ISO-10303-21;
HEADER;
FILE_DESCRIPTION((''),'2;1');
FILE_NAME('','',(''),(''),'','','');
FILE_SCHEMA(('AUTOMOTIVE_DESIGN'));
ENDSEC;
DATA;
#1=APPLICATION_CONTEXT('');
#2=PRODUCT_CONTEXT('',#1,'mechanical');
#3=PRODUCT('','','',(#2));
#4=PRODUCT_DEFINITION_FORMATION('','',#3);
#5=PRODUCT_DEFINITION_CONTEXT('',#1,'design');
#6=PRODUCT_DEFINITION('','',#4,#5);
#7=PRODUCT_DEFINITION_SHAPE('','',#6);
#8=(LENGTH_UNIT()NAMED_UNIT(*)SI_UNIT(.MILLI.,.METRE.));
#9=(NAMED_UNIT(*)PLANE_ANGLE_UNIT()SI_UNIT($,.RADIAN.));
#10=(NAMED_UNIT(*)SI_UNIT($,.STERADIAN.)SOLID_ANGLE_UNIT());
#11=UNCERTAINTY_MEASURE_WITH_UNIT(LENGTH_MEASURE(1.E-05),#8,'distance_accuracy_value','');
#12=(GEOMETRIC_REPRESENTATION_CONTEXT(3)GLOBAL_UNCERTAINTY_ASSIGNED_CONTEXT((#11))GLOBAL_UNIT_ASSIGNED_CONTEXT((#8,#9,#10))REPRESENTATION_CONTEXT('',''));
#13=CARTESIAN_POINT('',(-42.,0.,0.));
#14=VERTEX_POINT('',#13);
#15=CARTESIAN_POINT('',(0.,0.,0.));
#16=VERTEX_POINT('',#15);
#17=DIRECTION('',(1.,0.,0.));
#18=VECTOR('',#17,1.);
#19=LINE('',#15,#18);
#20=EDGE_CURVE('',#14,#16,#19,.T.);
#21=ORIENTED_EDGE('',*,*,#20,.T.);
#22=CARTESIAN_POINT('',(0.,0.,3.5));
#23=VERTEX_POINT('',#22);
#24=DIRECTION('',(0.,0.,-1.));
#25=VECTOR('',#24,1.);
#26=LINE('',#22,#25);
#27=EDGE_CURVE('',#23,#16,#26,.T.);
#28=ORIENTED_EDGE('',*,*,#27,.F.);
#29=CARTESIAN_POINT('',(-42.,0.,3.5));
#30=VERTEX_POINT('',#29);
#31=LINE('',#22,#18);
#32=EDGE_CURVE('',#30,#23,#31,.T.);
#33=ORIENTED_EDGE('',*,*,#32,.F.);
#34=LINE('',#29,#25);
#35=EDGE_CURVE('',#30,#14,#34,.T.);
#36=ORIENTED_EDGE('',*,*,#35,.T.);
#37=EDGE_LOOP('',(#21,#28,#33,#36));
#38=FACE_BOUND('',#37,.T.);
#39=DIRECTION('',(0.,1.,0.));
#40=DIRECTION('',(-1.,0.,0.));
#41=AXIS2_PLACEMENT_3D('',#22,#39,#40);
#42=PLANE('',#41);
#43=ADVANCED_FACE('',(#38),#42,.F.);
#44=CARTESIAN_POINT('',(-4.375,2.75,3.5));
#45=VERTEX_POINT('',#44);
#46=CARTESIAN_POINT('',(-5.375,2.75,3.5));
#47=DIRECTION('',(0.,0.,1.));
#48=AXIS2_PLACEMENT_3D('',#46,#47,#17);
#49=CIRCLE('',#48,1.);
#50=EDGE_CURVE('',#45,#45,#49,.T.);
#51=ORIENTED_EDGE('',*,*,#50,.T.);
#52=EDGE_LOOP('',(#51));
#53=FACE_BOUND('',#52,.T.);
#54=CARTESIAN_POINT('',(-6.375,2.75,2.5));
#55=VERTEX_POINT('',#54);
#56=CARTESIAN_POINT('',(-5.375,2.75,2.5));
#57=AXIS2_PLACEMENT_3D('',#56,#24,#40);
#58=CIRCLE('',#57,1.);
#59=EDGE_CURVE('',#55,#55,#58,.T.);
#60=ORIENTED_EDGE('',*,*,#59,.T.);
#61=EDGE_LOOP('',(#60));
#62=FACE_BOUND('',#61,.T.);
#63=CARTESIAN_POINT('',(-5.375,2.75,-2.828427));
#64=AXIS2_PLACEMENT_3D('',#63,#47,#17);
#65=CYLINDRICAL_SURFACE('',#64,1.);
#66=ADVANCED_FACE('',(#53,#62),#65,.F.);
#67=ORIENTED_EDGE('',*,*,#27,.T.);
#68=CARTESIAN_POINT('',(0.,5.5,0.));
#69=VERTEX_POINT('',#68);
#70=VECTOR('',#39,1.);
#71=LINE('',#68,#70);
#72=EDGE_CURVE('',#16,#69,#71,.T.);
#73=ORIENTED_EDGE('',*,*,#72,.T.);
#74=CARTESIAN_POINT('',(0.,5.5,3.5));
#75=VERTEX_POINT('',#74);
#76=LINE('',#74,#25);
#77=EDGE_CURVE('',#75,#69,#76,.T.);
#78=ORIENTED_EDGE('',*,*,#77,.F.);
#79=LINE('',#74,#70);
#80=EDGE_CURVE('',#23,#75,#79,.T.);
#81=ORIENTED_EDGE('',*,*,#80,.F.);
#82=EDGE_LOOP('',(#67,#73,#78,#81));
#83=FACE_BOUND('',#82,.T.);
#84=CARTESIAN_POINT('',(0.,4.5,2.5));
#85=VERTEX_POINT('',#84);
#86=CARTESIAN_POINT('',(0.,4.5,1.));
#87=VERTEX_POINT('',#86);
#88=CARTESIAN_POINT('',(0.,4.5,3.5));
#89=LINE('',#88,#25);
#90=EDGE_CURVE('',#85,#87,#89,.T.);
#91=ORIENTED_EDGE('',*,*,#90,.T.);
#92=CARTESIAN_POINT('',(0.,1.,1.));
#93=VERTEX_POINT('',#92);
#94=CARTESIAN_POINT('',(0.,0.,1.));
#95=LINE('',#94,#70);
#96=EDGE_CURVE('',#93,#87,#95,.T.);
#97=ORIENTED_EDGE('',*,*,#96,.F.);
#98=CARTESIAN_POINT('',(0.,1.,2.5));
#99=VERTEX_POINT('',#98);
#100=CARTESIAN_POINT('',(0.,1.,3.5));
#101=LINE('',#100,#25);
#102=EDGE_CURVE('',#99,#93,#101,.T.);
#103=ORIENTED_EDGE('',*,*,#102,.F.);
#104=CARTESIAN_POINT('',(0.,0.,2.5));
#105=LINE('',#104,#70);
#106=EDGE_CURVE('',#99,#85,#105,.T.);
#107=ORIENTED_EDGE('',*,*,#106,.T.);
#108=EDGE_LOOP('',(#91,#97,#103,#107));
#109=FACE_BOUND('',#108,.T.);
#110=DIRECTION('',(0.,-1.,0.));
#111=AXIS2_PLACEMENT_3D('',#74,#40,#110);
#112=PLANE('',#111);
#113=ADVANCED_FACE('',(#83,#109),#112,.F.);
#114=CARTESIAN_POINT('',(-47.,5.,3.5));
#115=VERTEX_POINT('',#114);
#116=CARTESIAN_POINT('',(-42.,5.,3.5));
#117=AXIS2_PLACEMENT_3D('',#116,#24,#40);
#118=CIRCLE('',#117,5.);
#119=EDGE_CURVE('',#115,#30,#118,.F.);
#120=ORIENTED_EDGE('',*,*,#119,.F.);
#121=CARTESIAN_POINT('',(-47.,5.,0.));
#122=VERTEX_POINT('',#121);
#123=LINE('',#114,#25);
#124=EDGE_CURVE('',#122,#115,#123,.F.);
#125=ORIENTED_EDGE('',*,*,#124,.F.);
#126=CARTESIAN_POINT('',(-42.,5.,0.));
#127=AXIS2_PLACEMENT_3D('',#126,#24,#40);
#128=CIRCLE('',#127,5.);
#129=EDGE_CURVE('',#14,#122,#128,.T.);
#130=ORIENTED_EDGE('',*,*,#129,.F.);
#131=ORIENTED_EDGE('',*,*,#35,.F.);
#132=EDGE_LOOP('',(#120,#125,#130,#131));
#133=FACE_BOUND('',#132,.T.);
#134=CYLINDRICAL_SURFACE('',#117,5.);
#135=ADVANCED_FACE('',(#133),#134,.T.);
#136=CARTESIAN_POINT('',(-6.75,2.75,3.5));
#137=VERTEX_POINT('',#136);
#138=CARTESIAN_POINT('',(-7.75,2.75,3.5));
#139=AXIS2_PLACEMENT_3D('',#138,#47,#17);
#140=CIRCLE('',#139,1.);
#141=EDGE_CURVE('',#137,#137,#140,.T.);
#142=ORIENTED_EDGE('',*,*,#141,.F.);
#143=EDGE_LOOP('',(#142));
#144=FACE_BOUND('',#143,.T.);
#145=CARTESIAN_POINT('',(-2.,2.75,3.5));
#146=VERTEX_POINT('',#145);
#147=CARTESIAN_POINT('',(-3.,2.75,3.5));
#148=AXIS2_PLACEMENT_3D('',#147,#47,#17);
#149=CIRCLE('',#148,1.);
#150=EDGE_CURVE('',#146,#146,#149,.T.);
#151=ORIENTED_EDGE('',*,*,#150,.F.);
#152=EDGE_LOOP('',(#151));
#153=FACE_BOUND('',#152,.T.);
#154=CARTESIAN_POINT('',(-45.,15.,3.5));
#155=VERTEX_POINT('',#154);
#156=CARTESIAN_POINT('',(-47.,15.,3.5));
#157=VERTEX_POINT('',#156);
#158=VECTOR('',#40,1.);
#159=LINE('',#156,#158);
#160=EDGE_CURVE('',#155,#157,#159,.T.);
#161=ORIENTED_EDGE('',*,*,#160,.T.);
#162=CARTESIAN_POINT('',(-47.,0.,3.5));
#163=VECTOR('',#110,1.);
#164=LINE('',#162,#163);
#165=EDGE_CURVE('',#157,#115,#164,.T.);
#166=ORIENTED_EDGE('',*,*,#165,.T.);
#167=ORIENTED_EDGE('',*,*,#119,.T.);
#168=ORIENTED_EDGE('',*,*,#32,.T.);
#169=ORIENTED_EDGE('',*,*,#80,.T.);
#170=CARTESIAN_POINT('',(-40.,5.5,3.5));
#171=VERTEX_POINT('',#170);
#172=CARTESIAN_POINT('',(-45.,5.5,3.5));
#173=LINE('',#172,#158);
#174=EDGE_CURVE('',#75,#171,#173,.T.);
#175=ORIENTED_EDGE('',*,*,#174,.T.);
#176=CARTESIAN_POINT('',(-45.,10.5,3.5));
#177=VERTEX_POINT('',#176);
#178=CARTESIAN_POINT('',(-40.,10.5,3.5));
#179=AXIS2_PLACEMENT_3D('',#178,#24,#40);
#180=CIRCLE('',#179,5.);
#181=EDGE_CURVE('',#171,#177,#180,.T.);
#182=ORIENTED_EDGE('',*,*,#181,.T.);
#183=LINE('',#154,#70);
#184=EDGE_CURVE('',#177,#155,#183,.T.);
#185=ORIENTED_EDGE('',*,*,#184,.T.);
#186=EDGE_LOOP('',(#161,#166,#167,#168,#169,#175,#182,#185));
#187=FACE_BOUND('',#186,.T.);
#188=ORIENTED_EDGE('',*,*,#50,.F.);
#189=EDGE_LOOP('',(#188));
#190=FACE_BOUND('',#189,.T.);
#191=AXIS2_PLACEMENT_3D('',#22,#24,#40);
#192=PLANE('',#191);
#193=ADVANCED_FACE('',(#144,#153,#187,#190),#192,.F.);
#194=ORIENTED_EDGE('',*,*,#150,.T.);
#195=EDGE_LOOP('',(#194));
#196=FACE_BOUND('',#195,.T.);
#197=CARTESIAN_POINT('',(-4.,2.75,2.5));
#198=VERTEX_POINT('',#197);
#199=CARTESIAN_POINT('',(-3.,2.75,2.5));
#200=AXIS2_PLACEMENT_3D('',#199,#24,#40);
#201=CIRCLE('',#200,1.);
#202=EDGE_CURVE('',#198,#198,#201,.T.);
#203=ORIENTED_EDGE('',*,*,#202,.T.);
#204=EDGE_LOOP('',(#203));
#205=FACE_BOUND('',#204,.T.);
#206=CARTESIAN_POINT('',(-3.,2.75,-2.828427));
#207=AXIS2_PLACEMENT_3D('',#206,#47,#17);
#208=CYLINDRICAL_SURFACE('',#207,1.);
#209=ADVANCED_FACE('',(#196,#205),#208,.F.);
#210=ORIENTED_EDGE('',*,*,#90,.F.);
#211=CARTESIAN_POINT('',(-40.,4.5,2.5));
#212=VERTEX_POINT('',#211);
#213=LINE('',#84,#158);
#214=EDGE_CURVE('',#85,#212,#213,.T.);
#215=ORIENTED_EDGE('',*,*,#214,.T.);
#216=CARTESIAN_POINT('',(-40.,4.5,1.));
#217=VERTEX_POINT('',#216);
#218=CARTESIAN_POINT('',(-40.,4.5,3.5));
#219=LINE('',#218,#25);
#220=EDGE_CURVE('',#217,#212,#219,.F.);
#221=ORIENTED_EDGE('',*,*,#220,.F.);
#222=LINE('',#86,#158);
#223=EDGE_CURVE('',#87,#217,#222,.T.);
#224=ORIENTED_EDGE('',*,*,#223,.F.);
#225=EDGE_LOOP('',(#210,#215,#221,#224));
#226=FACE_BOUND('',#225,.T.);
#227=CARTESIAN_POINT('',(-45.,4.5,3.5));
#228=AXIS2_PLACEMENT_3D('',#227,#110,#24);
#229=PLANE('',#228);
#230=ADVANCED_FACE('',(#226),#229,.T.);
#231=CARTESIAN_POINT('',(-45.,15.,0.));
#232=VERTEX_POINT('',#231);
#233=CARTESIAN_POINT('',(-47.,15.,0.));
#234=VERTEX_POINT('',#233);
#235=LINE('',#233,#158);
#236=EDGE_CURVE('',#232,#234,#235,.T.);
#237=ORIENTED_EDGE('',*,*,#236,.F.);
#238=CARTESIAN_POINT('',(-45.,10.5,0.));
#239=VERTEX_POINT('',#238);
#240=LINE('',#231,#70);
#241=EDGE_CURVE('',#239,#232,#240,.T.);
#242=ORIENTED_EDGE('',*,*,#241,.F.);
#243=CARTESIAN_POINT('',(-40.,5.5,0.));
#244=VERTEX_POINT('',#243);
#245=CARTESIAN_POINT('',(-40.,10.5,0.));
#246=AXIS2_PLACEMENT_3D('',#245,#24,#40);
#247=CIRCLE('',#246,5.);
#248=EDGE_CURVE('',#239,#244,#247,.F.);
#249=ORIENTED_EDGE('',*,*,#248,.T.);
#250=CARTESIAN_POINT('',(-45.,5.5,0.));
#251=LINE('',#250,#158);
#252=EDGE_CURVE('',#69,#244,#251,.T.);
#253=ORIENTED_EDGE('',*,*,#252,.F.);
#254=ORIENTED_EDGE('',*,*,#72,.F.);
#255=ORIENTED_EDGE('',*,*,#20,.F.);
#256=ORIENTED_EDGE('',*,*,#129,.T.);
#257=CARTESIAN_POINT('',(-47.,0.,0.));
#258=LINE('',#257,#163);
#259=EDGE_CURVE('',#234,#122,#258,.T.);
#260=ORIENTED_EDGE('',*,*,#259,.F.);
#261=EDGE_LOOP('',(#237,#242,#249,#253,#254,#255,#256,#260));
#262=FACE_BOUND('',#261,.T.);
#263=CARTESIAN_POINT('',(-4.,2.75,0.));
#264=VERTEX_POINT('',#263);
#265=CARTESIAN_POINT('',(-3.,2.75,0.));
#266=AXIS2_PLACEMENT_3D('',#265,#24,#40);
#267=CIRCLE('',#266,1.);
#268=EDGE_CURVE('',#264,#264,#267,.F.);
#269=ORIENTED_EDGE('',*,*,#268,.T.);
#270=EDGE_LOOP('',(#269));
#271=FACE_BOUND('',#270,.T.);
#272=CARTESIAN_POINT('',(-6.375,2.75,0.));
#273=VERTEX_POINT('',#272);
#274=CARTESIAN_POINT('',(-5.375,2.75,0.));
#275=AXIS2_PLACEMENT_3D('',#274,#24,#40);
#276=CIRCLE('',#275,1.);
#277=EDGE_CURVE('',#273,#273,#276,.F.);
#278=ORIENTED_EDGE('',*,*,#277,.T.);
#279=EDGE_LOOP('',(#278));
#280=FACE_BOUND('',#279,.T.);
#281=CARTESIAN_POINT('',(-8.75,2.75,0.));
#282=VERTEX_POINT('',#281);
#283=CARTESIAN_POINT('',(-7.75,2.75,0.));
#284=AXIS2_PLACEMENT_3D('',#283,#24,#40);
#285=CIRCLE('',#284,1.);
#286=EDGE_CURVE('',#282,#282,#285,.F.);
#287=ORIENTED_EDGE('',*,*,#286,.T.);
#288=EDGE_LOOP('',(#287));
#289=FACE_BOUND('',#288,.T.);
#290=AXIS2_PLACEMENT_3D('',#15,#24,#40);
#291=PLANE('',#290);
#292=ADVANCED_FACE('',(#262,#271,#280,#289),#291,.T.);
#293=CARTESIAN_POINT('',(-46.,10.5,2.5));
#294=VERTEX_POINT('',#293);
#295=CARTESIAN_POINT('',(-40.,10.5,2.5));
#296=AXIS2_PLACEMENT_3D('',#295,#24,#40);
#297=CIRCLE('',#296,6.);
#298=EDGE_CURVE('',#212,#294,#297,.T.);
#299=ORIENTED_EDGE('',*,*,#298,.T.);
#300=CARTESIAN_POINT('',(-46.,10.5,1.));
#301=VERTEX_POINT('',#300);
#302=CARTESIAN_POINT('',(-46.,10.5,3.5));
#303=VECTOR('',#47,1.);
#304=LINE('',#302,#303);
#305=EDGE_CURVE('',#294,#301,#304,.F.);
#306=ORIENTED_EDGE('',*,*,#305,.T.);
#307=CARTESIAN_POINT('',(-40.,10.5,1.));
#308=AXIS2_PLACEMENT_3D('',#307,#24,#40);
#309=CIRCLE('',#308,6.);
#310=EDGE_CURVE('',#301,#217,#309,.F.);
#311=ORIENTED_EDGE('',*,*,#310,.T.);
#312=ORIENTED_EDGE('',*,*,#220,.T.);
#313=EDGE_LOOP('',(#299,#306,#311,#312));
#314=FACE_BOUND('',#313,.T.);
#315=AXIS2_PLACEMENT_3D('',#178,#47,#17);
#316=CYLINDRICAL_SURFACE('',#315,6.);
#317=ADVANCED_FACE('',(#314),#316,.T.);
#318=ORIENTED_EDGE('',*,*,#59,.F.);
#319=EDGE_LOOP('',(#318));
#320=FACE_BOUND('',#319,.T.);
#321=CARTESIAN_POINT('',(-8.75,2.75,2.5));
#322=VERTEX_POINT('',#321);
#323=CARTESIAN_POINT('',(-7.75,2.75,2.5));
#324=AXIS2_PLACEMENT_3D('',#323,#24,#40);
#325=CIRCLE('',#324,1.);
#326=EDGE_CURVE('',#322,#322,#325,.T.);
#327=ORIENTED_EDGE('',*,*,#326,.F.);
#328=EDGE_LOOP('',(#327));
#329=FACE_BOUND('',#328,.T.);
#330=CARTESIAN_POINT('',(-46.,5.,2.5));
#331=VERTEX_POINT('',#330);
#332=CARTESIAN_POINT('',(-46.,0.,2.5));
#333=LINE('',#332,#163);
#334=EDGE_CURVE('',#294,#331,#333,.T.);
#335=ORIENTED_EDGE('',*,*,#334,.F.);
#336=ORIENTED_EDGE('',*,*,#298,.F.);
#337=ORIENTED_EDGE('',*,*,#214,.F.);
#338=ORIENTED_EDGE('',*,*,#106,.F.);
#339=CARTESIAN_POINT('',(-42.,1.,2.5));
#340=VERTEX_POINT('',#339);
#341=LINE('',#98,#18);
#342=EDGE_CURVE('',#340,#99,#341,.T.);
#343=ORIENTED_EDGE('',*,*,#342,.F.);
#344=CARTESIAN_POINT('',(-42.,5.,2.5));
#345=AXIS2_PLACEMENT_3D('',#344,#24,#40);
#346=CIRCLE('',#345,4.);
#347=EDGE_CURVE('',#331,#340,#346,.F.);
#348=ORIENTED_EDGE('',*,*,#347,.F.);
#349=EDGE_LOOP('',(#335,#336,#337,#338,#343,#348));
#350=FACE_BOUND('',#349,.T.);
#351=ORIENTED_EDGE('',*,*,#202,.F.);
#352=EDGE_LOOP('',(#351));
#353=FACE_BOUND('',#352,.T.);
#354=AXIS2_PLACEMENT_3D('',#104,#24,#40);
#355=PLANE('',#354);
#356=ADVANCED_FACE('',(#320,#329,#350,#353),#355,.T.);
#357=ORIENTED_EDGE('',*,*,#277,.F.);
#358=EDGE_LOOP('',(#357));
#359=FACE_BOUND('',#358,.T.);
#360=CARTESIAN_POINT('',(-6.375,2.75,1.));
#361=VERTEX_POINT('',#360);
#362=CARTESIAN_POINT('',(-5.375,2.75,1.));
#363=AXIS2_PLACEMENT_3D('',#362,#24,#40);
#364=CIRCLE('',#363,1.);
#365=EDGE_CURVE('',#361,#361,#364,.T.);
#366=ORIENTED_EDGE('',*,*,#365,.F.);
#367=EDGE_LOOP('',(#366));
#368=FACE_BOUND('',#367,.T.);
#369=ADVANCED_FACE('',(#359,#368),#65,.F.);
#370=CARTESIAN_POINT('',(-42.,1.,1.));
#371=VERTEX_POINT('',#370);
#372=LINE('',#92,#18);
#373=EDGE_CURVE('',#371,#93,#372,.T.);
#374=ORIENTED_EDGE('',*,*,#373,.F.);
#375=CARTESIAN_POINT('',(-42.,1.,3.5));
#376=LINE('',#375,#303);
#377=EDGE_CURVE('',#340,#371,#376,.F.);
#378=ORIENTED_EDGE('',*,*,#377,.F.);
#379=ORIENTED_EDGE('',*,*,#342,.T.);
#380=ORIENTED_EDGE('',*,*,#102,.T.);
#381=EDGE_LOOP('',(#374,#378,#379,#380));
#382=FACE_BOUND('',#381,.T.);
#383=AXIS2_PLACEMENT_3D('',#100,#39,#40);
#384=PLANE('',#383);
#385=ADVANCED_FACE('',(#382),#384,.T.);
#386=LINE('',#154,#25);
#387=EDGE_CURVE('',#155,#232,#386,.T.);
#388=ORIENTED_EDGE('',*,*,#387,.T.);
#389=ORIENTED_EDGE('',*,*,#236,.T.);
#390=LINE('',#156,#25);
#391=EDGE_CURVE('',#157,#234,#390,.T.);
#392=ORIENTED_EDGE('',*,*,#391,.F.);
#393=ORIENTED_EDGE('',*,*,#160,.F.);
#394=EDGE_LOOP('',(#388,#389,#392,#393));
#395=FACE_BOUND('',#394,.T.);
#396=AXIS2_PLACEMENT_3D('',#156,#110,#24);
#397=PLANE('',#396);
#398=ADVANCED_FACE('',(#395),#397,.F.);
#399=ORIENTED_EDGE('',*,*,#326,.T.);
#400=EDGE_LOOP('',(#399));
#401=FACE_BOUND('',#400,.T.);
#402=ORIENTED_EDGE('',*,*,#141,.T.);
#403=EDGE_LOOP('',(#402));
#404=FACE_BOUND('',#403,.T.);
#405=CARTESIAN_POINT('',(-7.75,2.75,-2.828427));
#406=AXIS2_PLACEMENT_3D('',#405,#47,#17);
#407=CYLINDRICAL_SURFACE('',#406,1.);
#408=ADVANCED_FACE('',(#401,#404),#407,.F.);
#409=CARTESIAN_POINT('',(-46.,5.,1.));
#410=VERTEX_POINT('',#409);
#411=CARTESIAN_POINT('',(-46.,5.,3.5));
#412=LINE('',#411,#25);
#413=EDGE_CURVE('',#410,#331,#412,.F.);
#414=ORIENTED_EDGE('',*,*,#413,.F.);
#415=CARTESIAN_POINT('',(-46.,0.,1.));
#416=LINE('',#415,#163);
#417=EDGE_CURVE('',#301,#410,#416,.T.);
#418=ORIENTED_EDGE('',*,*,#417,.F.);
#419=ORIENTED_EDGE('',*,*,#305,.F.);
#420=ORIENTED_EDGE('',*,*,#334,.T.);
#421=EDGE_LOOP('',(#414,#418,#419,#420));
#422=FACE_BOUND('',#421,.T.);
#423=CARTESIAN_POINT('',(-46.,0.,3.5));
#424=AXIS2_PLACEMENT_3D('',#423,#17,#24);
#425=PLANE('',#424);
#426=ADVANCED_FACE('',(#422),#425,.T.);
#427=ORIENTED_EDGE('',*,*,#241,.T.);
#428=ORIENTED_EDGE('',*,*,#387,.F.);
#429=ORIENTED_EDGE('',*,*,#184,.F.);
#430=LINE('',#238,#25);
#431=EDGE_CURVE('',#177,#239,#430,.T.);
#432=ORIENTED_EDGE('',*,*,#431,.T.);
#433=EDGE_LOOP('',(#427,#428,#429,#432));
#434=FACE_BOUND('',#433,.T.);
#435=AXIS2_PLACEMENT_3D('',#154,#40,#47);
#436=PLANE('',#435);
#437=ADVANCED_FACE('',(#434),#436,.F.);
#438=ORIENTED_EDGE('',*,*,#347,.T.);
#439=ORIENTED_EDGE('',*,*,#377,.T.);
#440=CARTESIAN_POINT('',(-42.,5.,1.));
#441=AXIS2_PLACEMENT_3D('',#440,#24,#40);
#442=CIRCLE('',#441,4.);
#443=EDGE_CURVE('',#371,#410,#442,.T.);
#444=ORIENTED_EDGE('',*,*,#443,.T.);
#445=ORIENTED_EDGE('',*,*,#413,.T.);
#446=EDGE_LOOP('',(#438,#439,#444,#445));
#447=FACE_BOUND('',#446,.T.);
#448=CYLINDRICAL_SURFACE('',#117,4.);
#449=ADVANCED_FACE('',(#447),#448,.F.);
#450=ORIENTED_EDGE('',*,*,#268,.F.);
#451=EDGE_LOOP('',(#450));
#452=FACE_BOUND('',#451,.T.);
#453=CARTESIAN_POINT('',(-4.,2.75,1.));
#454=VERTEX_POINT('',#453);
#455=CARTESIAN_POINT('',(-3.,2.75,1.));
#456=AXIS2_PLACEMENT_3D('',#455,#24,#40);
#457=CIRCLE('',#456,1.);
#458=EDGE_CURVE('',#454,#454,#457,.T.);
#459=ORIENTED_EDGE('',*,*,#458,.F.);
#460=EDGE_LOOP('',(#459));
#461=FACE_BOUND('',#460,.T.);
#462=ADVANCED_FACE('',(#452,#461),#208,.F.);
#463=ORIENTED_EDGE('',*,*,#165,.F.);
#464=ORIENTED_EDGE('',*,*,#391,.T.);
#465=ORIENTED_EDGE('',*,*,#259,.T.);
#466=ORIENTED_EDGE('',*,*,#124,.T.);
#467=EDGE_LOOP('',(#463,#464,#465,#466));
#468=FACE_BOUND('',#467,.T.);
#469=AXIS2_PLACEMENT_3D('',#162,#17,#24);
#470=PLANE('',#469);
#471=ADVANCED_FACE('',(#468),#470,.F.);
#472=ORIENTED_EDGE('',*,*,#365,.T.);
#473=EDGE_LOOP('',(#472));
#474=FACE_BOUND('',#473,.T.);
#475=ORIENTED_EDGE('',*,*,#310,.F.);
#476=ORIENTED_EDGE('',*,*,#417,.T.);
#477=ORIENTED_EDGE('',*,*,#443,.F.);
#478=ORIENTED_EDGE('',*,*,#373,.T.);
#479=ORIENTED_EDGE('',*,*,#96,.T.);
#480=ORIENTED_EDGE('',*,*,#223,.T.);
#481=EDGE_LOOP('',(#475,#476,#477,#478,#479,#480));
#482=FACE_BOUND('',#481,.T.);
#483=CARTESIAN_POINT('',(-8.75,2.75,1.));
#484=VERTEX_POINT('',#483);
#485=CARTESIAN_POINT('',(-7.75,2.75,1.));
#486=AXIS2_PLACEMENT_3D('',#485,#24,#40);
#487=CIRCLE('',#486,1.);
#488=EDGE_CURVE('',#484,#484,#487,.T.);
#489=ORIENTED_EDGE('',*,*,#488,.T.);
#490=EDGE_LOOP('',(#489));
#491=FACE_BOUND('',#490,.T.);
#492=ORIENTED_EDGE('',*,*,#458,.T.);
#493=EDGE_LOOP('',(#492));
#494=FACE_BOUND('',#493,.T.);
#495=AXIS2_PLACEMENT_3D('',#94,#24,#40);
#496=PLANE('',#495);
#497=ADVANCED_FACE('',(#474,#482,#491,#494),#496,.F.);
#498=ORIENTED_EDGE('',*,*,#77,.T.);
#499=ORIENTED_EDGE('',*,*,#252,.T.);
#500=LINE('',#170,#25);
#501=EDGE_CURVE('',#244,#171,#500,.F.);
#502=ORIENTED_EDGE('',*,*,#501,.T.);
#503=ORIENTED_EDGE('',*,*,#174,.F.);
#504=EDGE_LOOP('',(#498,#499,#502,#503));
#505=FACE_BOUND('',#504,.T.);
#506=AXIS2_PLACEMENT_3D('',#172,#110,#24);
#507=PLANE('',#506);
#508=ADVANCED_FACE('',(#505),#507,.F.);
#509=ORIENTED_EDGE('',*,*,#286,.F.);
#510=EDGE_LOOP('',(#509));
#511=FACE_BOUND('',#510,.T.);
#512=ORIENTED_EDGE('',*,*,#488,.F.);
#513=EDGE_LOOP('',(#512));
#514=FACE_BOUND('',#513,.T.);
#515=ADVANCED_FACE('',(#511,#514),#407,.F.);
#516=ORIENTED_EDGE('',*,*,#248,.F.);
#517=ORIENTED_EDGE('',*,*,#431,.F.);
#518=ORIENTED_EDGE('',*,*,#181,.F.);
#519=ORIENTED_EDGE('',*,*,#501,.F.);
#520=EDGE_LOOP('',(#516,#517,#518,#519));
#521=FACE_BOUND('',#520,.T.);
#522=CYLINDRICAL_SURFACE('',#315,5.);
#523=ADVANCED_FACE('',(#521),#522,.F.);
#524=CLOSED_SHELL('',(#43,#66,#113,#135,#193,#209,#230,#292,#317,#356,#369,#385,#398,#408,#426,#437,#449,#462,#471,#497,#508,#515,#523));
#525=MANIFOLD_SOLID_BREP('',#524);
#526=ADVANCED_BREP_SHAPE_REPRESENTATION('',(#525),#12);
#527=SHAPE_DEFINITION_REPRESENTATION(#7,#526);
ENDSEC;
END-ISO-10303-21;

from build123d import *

# Parameters (mm, degrees)
BOSS_EXTRUDE1_DEPTH = 3.5
FILLET2_R           = 5
SHELL1_START        = 1
SHELL1_DEPTH        = 1.5
CUT_EXTRUDE1_START  = -3.5
SKETCH2_R           = 1
CUT_EXTRUDE1_DEPTH  = 3.5


# Read off the part's stored shape, not the designer's step: Shell1
with BuildPart() as part:
    # Sketch1 → Boss-Extrude1 (new body)
    with BuildSketch(Plane.XY):
        Polygon((0, 0), (-47, 0), (-47, 15), (-45, 15), (-45, 5.5), (0, 5.5), align=None)
    extrude(amount=BOSS_EXTRUDE1_DEPTH)

    # Fillet2
    fillet2_edges = [part.edges().sort_by_distance(p)[0] for p in [
        (-47, 0, 1.75),
        (-45, 5.5, 1.75),
    ]]
    fillet(fillet2_edges, radius=FILLET2_R)

    # Shell1 outline → Shell1 (cut)
    with BuildSketch(Plane.XY.offset(SHELL1_START)):
        with BuildLine():
            Line((0, 4.5), (-40, 4.5))
            ThreePointArc((-40, 4.5), (-44.242640687, 6.257359313), (-46, 10.5))
            Line((-46, 10.5), (-46, 5))
            ThreePointArc((-46, 5), (-44.828427125, 2.171572875), (-42, 1))
            Line((-42, 1), (0, 1))
            Line((0, 1), (0, 4.5))
        make_face()
    extrude(amount=SHELL1_DEPTH, mode=Mode.SUBTRACT)

    # Sketch2 → Cut-Extrude1 (cut)
    with BuildSketch(Plane.XY.offset(3.5).offset(CUT_EXTRUDE1_START)):
        with Locations(Location((-3, 2.75, 0), (0, 0, 180))):
            Circle(SKETCH2_R)
        with Locations(Location((-5.375, 2.75, 0), (0, 0, 180))):
            Circle(SKETCH2_R)
        with Locations(Location((-7.75, 2.75, 0), (0, 0, 180))):
            Circle(SKETCH2_R)
    extrude(amount=CUT_EXTRUDE1_DEPTH, mode=Mode.SUBTRACT)


solid = part.part
